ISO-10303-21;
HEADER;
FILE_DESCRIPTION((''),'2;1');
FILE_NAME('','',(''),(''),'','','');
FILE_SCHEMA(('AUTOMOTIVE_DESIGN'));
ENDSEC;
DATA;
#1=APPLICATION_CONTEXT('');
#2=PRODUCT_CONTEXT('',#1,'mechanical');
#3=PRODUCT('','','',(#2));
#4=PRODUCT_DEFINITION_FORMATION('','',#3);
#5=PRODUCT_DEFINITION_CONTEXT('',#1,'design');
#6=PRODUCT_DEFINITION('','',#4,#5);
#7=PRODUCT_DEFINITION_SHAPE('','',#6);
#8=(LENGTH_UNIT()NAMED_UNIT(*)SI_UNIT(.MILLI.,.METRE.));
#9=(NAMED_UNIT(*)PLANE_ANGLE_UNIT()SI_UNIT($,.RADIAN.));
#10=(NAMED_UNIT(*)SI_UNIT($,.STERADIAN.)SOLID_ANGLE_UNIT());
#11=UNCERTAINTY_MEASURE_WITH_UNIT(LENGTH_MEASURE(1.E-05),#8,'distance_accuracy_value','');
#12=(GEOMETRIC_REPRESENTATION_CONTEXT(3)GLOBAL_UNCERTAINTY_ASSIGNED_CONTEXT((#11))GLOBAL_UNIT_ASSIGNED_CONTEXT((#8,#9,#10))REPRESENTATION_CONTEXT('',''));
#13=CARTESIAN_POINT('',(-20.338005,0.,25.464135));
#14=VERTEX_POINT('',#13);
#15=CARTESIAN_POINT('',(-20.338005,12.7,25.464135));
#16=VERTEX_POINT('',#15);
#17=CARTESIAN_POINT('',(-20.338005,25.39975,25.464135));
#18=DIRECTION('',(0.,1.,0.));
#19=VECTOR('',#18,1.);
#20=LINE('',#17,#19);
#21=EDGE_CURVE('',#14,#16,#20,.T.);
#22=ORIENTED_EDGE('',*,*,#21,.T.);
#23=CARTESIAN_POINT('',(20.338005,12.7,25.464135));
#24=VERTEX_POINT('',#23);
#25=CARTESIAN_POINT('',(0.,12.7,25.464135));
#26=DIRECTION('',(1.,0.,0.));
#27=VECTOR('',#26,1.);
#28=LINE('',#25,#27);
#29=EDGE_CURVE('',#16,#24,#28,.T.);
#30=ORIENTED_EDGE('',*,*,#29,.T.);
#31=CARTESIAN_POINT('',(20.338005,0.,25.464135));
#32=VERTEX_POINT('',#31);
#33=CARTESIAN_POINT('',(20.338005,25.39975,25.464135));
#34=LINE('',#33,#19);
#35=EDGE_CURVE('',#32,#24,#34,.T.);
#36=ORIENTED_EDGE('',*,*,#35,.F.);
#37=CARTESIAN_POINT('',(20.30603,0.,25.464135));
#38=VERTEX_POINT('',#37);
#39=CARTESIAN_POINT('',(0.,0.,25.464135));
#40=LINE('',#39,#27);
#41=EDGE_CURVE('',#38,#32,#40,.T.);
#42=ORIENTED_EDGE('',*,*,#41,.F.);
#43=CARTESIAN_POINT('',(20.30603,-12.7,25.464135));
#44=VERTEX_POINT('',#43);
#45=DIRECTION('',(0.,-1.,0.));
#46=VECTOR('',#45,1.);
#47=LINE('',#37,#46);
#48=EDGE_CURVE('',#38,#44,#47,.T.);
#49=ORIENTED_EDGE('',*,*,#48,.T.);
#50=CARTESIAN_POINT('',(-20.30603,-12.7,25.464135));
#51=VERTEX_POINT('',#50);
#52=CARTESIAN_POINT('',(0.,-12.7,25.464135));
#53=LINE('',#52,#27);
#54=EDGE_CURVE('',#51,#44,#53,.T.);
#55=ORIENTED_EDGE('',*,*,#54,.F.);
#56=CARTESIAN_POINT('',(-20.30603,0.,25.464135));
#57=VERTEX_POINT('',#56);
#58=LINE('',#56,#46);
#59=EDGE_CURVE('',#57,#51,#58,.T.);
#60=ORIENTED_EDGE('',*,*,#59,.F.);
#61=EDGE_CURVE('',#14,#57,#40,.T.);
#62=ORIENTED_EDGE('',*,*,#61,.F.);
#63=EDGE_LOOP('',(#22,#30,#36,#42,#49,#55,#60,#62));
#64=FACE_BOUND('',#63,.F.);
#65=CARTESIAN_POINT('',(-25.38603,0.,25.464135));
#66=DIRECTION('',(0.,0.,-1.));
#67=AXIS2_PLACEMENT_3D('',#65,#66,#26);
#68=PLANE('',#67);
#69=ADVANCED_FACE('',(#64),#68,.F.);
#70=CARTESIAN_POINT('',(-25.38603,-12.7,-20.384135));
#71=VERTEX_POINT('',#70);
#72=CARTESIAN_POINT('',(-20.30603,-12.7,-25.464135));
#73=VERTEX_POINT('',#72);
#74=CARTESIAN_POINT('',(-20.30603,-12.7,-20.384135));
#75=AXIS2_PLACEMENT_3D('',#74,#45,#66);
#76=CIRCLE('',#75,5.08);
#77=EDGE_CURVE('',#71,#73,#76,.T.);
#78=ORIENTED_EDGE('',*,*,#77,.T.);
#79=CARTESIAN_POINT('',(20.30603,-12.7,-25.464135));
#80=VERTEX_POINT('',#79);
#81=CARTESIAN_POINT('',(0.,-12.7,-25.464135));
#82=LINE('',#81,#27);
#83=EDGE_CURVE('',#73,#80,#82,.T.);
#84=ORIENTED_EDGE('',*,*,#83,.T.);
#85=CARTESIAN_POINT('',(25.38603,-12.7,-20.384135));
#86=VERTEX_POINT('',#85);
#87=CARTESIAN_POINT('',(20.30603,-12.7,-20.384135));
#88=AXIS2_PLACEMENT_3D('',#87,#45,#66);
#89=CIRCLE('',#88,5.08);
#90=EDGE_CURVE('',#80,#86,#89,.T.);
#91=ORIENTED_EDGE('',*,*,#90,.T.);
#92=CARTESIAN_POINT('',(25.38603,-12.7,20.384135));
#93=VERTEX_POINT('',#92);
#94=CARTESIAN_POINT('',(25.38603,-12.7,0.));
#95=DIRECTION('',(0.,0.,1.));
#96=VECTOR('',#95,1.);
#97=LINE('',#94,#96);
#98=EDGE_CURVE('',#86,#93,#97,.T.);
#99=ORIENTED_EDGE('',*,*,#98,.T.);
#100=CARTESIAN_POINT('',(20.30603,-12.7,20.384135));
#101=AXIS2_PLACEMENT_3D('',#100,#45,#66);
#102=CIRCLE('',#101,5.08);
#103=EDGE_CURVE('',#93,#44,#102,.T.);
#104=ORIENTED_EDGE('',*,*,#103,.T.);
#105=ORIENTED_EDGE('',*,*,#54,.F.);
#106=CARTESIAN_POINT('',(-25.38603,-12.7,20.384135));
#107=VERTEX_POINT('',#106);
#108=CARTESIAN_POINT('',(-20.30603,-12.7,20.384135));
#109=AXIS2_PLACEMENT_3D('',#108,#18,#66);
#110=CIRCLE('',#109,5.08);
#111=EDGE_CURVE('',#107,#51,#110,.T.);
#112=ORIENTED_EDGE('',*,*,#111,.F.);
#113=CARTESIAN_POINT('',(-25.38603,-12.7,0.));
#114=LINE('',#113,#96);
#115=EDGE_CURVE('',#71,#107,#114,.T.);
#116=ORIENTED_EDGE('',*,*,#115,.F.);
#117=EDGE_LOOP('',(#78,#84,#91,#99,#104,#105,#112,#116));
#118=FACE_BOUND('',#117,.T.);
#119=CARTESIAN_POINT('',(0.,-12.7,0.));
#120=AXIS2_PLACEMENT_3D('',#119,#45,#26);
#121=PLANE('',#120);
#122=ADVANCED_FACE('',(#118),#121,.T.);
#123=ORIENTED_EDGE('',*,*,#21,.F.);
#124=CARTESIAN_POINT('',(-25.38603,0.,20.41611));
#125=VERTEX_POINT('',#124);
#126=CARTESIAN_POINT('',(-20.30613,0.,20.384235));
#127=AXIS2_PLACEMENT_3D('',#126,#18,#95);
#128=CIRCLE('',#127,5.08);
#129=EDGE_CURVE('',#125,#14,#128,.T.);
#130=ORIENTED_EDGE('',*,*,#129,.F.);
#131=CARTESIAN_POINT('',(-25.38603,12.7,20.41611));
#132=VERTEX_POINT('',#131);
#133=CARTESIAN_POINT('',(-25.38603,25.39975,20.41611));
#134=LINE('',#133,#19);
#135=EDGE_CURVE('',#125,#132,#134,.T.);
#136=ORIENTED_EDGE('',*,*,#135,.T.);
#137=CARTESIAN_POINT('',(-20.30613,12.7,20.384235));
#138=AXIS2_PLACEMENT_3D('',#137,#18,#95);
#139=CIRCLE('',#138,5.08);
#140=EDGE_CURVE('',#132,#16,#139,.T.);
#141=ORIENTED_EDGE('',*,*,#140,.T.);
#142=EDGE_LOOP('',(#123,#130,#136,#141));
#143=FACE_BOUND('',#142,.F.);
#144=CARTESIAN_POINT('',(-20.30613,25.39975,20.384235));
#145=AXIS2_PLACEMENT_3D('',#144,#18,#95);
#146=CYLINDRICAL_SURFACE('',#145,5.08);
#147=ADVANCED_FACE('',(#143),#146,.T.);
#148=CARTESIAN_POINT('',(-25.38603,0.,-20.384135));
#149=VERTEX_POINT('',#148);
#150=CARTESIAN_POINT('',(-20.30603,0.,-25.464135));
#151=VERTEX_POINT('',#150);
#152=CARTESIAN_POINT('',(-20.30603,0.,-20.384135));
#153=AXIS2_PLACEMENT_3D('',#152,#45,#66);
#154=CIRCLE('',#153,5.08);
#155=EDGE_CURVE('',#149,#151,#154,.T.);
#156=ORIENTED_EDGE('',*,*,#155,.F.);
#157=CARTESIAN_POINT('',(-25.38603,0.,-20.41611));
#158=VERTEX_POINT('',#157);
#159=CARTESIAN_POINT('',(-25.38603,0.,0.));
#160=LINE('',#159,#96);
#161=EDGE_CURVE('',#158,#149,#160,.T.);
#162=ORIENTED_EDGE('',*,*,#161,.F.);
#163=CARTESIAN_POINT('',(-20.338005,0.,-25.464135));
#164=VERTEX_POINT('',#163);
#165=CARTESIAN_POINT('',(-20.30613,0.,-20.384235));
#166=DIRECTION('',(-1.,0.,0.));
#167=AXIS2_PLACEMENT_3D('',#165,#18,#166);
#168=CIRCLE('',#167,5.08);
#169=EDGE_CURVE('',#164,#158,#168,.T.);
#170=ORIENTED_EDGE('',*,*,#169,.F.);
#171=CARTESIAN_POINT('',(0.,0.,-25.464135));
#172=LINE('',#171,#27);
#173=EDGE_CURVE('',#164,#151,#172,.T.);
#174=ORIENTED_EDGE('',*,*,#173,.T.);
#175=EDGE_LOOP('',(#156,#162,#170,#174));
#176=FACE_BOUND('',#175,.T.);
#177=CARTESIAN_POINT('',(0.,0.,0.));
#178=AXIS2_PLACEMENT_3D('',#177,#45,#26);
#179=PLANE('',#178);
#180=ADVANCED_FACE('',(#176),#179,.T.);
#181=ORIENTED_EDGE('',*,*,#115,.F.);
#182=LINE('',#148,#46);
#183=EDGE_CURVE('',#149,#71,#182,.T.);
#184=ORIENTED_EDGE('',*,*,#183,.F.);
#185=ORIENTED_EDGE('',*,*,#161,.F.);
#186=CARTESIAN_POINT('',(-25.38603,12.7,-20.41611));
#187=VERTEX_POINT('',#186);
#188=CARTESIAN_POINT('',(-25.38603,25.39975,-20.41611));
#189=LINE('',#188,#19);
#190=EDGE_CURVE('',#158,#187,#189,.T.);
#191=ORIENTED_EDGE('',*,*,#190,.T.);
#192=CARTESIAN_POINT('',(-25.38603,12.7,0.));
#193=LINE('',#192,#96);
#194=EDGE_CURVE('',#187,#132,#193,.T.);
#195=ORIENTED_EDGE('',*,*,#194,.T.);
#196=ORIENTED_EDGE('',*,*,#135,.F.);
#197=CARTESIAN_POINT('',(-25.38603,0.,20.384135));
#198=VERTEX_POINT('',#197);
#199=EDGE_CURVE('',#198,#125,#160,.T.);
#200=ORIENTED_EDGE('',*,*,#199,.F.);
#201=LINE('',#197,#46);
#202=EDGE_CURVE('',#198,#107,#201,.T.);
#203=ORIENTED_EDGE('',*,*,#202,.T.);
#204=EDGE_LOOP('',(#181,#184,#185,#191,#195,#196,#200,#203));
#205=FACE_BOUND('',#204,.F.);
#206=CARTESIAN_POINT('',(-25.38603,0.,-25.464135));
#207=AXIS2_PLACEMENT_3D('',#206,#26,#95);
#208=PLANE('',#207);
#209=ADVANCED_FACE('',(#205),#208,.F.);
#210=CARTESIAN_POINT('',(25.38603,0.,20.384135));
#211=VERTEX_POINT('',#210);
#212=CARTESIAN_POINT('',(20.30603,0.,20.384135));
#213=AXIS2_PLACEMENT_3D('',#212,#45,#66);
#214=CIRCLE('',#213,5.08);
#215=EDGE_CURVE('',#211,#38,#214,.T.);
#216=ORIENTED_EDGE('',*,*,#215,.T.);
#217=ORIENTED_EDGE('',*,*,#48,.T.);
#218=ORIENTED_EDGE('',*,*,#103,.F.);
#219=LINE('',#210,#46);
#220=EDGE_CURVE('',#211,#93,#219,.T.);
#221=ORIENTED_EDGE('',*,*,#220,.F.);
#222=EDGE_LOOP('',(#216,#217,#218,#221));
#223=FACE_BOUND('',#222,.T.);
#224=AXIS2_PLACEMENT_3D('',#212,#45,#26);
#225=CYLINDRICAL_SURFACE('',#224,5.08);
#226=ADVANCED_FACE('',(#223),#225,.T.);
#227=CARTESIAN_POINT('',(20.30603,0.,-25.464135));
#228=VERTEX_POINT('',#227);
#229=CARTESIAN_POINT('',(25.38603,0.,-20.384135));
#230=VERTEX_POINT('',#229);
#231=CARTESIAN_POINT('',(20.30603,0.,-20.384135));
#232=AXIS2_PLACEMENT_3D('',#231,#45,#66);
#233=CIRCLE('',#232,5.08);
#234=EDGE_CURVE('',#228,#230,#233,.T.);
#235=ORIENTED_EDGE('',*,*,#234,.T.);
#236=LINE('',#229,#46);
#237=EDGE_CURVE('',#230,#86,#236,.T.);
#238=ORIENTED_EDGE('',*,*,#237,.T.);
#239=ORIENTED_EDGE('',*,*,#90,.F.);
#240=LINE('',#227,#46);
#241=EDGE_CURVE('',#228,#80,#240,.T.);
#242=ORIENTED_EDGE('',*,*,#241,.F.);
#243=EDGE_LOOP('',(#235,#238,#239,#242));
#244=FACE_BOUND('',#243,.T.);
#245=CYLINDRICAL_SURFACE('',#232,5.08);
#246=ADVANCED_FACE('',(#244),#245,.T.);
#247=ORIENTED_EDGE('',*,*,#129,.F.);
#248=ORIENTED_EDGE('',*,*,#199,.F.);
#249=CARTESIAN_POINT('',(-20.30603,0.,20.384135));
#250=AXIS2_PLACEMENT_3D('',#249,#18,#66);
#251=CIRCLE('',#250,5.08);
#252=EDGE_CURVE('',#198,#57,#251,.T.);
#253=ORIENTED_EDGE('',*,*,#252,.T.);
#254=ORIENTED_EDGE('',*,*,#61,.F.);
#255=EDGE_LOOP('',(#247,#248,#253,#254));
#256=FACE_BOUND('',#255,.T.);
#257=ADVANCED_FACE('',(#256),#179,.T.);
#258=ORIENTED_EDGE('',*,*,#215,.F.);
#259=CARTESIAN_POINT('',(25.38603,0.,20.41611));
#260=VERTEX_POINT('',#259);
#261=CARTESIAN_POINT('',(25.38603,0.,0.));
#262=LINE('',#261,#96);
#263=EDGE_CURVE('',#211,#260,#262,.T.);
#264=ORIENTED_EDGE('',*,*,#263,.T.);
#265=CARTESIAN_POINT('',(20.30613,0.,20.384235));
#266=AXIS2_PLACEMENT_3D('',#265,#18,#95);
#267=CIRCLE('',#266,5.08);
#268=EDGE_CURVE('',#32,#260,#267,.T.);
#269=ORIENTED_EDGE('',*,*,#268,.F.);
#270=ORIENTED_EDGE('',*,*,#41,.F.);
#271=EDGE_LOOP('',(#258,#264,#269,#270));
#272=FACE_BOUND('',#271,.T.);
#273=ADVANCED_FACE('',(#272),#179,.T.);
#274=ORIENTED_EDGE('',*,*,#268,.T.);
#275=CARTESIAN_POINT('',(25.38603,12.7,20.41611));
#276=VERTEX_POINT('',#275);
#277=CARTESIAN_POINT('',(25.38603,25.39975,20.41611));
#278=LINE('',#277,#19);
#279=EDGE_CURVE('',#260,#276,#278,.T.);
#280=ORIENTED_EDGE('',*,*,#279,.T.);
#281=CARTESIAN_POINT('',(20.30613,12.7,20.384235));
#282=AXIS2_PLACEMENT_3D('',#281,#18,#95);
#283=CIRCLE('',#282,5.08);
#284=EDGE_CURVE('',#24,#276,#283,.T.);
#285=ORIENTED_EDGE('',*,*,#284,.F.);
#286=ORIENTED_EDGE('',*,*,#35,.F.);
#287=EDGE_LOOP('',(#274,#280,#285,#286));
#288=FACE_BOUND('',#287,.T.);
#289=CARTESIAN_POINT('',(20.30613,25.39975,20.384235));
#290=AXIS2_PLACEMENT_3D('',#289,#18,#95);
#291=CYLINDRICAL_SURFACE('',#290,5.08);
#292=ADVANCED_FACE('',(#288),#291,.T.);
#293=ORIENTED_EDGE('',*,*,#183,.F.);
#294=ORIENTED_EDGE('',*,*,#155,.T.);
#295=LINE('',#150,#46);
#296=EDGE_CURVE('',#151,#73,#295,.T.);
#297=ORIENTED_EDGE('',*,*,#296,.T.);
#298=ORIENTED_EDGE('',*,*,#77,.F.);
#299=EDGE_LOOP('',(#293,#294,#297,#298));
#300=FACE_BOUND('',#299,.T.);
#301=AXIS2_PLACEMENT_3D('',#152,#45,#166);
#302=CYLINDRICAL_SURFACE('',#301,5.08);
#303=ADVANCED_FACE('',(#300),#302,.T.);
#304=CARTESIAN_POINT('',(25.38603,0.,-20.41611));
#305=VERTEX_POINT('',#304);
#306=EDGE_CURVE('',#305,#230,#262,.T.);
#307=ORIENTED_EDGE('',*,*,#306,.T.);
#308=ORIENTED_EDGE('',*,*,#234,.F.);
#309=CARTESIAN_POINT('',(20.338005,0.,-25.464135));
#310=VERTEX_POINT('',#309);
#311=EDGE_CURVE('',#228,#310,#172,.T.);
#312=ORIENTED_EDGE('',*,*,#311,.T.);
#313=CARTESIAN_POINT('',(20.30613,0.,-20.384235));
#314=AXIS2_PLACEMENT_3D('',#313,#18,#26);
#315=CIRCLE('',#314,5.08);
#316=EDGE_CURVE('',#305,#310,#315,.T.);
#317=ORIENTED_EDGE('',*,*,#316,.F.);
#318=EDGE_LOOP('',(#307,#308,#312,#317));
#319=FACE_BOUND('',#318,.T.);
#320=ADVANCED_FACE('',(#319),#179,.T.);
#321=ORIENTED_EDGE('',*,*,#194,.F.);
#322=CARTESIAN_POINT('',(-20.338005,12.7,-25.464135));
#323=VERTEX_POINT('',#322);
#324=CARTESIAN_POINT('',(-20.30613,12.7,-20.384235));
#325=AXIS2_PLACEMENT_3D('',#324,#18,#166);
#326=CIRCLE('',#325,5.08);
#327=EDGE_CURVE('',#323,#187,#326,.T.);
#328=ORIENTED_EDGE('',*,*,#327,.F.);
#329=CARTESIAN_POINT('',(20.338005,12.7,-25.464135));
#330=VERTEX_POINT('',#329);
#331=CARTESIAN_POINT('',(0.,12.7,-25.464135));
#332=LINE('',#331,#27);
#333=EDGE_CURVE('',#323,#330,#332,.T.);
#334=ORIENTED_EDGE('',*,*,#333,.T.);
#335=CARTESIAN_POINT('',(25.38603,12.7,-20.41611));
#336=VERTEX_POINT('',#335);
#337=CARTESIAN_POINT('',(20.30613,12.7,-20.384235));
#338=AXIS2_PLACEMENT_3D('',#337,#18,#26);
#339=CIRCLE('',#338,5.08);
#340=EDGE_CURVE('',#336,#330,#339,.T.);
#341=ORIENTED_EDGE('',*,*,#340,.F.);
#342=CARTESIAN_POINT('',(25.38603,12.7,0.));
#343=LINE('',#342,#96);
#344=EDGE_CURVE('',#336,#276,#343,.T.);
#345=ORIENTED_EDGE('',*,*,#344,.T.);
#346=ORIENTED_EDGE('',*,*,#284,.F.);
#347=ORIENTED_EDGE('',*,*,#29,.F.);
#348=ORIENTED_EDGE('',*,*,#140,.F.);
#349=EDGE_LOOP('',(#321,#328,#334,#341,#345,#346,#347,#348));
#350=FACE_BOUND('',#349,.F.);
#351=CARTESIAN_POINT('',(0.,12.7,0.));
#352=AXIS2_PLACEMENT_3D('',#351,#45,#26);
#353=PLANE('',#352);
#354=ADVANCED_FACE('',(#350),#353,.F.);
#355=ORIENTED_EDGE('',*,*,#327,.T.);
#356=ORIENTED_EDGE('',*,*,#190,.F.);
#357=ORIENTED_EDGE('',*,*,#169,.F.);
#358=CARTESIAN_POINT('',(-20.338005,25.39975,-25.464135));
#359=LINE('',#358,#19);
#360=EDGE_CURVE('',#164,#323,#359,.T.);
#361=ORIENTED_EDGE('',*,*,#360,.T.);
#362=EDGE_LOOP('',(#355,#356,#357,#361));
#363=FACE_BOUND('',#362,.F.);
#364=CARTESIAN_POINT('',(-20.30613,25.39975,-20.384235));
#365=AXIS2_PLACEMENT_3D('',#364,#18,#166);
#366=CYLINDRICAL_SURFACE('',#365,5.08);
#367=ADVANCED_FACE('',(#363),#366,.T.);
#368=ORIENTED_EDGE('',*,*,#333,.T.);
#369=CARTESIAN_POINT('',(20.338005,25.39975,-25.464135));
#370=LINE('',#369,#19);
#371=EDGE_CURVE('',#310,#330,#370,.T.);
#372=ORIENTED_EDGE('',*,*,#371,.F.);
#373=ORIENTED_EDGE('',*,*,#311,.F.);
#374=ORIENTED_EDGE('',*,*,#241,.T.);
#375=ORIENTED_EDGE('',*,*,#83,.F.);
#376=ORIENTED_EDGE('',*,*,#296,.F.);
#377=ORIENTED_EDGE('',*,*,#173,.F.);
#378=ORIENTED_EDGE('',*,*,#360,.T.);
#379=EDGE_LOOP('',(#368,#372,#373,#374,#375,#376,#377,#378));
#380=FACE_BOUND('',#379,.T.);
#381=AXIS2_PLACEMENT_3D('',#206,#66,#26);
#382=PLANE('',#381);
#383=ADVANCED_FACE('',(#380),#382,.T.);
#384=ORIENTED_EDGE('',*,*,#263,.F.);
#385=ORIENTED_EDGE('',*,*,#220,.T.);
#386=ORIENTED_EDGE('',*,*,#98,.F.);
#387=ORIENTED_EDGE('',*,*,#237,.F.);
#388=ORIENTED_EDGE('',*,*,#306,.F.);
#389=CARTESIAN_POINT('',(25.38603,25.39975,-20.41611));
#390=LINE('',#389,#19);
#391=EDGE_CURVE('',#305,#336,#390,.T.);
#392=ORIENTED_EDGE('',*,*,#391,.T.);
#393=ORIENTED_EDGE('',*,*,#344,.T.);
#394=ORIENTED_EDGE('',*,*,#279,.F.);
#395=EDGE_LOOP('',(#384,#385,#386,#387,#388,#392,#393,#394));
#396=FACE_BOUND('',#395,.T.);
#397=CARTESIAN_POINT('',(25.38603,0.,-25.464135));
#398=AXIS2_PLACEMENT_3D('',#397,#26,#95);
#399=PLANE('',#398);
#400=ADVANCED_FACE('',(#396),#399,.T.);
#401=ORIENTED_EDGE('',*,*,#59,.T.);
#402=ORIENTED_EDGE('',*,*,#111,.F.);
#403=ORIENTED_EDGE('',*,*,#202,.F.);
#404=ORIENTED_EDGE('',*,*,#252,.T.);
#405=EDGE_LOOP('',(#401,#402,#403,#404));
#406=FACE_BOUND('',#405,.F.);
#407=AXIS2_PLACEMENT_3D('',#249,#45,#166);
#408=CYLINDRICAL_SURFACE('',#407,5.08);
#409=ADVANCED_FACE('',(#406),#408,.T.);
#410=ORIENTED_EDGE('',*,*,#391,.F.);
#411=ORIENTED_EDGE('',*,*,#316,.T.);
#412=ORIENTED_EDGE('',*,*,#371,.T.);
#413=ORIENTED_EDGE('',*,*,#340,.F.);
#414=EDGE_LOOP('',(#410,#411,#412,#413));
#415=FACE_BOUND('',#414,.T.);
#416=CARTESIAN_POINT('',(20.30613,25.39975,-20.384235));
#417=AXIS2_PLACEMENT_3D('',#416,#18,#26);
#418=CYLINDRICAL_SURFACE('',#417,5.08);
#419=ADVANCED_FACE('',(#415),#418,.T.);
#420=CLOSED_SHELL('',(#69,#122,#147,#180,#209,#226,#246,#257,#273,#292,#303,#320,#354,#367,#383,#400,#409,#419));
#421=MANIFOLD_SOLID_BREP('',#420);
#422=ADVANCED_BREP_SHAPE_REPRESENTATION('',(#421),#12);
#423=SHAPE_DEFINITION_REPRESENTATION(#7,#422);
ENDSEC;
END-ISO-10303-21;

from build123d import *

# Parameters (mm, degrees)
F0_W        = 50.77206
F0_H        = 50.92827
F1_DEPTH    = 12.7
F2_R        = 5.08
F3_DEPTH    = 12.7
F4_T1_DEPTH = 38.0995000049


# Not quite as in the source:
# - a fillet or chamfer that OpenCascade refuses, or shapes differently, is made with other operations: its cross-section is extruded or revolved along the edge and cut away or added


with BuildPart() as f1:
    # F0 (on Front) → F1 (new body)
    with BuildSketch(Plane.XZ):
        Rectangle(F0_W, F0_H)
    extrude(amount=F1_DEPTH)

    # F2
    f2_edges = [f1.edges().sort_by_distance(p)[0] for p in [
        (25.38603, -6.35, 25.464135),
        (-25.38603, -6.35, 25.464135),
        (-25.38603, -6.35, -25.464135),
        (25.38603, -6.35, -25.464135),
    ]]
    fillet(f2_edges, radius=F2_R)

    # F0 (on Front) → F3 (join)
    with BuildSketch(Plane.XZ):
        Rectangle(F0_W, F0_H)
    extrude(amount=-F3_DEPTH)

    # F4: fillet of radius 5.08 on 4 edges, made by hand

    # F4_s2 → F4_t1 (cut)
    with BuildSketch(Plane.XZ.offset(-25.3997500025)):
        with BuildLine():
            ThreePointArc((-20.30613, 25.464235), (-23.8982324484, 23.9763374484), (-25.38613, 20.384235))
            Line((-25.38613, 20.384235), (-25.48773, 20.384235))
            ThreePointArc((-25.48773, 20.384235), (-25.48763, 22.924185), (-25.48763, 25.464135))
            Line((-25.48763, 25.464135), (-25.38603, 25.565735))
            ThreePointArc((-25.38603, 25.565735), (-22.84608, 25.565735), (-20.30613, 25.565835))
            Line((-20.30613, 25.565835), (-20.30613, 25.464235))
        make_face()
        with BuildLine():
            ThreePointArc((-25.38613, -20.384235), (-23.8982324484, -23.9763374484), (-20.30613, -25.464235))
            Line((-20.30613, -25.464235), (-20.30613, -25.565835))
            ThreePointArc((-20.30613, -25.565835), (-22.84608, -25.565735), (-25.38603, -25.565735))
            Line((-25.38603, -25.565735), (-25.48763, -25.464135))
            ThreePointArc((-25.48763, -25.464135), (-25.48763, -22.924185), (-25.48773, -20.384235))
            Line((-25.48773, -20.384235), (-25.38613, -20.384235))
        make_face()
        with BuildLine():
            ThreePointArc((25.38613, -20.384235), (23.8982324484, -23.9763374484), (20.30613, -25.464235))
            Line((20.30613, -25.464235), (20.30613, -25.565835))
            ThreePointArc((20.30613, -25.565835), (22.84608, -25.565735), (25.38603, -25.565735))
            Line((25.38603, -25.565735), (25.48763, -25.464135))
            ThreePointArc((25.48763, -25.464135), (25.48763, -22.924185), (25.48773, -20.384235))
            Line((25.48773, -20.384235), (25.38613, -20.384235))
        make_face()
        with BuildLine():
            ThreePointArc((20.30613, 25.464235), (23.8982324484, 23.9763374484), (25.38613, 20.384235))
            Line((25.38613, 20.384235), (25.48773, 20.384235))
            ThreePointArc((25.48773, 20.384235), (25.48763, 22.924185), (25.48763, 25.464135))
            Line((25.48763, 25.464135), (25.38603, 25.565735))
            ThreePointArc((25.38603, 25.565735), (22.84608, 25.565735), (20.30613, 25.565835))
            Line((20.30613, 25.565835), (20.30613, 25.464235))
        make_face()
    extrude(amount=F4_T1_DEPTH, mode=Mode.SUBTRACT)


solid = f1.part
